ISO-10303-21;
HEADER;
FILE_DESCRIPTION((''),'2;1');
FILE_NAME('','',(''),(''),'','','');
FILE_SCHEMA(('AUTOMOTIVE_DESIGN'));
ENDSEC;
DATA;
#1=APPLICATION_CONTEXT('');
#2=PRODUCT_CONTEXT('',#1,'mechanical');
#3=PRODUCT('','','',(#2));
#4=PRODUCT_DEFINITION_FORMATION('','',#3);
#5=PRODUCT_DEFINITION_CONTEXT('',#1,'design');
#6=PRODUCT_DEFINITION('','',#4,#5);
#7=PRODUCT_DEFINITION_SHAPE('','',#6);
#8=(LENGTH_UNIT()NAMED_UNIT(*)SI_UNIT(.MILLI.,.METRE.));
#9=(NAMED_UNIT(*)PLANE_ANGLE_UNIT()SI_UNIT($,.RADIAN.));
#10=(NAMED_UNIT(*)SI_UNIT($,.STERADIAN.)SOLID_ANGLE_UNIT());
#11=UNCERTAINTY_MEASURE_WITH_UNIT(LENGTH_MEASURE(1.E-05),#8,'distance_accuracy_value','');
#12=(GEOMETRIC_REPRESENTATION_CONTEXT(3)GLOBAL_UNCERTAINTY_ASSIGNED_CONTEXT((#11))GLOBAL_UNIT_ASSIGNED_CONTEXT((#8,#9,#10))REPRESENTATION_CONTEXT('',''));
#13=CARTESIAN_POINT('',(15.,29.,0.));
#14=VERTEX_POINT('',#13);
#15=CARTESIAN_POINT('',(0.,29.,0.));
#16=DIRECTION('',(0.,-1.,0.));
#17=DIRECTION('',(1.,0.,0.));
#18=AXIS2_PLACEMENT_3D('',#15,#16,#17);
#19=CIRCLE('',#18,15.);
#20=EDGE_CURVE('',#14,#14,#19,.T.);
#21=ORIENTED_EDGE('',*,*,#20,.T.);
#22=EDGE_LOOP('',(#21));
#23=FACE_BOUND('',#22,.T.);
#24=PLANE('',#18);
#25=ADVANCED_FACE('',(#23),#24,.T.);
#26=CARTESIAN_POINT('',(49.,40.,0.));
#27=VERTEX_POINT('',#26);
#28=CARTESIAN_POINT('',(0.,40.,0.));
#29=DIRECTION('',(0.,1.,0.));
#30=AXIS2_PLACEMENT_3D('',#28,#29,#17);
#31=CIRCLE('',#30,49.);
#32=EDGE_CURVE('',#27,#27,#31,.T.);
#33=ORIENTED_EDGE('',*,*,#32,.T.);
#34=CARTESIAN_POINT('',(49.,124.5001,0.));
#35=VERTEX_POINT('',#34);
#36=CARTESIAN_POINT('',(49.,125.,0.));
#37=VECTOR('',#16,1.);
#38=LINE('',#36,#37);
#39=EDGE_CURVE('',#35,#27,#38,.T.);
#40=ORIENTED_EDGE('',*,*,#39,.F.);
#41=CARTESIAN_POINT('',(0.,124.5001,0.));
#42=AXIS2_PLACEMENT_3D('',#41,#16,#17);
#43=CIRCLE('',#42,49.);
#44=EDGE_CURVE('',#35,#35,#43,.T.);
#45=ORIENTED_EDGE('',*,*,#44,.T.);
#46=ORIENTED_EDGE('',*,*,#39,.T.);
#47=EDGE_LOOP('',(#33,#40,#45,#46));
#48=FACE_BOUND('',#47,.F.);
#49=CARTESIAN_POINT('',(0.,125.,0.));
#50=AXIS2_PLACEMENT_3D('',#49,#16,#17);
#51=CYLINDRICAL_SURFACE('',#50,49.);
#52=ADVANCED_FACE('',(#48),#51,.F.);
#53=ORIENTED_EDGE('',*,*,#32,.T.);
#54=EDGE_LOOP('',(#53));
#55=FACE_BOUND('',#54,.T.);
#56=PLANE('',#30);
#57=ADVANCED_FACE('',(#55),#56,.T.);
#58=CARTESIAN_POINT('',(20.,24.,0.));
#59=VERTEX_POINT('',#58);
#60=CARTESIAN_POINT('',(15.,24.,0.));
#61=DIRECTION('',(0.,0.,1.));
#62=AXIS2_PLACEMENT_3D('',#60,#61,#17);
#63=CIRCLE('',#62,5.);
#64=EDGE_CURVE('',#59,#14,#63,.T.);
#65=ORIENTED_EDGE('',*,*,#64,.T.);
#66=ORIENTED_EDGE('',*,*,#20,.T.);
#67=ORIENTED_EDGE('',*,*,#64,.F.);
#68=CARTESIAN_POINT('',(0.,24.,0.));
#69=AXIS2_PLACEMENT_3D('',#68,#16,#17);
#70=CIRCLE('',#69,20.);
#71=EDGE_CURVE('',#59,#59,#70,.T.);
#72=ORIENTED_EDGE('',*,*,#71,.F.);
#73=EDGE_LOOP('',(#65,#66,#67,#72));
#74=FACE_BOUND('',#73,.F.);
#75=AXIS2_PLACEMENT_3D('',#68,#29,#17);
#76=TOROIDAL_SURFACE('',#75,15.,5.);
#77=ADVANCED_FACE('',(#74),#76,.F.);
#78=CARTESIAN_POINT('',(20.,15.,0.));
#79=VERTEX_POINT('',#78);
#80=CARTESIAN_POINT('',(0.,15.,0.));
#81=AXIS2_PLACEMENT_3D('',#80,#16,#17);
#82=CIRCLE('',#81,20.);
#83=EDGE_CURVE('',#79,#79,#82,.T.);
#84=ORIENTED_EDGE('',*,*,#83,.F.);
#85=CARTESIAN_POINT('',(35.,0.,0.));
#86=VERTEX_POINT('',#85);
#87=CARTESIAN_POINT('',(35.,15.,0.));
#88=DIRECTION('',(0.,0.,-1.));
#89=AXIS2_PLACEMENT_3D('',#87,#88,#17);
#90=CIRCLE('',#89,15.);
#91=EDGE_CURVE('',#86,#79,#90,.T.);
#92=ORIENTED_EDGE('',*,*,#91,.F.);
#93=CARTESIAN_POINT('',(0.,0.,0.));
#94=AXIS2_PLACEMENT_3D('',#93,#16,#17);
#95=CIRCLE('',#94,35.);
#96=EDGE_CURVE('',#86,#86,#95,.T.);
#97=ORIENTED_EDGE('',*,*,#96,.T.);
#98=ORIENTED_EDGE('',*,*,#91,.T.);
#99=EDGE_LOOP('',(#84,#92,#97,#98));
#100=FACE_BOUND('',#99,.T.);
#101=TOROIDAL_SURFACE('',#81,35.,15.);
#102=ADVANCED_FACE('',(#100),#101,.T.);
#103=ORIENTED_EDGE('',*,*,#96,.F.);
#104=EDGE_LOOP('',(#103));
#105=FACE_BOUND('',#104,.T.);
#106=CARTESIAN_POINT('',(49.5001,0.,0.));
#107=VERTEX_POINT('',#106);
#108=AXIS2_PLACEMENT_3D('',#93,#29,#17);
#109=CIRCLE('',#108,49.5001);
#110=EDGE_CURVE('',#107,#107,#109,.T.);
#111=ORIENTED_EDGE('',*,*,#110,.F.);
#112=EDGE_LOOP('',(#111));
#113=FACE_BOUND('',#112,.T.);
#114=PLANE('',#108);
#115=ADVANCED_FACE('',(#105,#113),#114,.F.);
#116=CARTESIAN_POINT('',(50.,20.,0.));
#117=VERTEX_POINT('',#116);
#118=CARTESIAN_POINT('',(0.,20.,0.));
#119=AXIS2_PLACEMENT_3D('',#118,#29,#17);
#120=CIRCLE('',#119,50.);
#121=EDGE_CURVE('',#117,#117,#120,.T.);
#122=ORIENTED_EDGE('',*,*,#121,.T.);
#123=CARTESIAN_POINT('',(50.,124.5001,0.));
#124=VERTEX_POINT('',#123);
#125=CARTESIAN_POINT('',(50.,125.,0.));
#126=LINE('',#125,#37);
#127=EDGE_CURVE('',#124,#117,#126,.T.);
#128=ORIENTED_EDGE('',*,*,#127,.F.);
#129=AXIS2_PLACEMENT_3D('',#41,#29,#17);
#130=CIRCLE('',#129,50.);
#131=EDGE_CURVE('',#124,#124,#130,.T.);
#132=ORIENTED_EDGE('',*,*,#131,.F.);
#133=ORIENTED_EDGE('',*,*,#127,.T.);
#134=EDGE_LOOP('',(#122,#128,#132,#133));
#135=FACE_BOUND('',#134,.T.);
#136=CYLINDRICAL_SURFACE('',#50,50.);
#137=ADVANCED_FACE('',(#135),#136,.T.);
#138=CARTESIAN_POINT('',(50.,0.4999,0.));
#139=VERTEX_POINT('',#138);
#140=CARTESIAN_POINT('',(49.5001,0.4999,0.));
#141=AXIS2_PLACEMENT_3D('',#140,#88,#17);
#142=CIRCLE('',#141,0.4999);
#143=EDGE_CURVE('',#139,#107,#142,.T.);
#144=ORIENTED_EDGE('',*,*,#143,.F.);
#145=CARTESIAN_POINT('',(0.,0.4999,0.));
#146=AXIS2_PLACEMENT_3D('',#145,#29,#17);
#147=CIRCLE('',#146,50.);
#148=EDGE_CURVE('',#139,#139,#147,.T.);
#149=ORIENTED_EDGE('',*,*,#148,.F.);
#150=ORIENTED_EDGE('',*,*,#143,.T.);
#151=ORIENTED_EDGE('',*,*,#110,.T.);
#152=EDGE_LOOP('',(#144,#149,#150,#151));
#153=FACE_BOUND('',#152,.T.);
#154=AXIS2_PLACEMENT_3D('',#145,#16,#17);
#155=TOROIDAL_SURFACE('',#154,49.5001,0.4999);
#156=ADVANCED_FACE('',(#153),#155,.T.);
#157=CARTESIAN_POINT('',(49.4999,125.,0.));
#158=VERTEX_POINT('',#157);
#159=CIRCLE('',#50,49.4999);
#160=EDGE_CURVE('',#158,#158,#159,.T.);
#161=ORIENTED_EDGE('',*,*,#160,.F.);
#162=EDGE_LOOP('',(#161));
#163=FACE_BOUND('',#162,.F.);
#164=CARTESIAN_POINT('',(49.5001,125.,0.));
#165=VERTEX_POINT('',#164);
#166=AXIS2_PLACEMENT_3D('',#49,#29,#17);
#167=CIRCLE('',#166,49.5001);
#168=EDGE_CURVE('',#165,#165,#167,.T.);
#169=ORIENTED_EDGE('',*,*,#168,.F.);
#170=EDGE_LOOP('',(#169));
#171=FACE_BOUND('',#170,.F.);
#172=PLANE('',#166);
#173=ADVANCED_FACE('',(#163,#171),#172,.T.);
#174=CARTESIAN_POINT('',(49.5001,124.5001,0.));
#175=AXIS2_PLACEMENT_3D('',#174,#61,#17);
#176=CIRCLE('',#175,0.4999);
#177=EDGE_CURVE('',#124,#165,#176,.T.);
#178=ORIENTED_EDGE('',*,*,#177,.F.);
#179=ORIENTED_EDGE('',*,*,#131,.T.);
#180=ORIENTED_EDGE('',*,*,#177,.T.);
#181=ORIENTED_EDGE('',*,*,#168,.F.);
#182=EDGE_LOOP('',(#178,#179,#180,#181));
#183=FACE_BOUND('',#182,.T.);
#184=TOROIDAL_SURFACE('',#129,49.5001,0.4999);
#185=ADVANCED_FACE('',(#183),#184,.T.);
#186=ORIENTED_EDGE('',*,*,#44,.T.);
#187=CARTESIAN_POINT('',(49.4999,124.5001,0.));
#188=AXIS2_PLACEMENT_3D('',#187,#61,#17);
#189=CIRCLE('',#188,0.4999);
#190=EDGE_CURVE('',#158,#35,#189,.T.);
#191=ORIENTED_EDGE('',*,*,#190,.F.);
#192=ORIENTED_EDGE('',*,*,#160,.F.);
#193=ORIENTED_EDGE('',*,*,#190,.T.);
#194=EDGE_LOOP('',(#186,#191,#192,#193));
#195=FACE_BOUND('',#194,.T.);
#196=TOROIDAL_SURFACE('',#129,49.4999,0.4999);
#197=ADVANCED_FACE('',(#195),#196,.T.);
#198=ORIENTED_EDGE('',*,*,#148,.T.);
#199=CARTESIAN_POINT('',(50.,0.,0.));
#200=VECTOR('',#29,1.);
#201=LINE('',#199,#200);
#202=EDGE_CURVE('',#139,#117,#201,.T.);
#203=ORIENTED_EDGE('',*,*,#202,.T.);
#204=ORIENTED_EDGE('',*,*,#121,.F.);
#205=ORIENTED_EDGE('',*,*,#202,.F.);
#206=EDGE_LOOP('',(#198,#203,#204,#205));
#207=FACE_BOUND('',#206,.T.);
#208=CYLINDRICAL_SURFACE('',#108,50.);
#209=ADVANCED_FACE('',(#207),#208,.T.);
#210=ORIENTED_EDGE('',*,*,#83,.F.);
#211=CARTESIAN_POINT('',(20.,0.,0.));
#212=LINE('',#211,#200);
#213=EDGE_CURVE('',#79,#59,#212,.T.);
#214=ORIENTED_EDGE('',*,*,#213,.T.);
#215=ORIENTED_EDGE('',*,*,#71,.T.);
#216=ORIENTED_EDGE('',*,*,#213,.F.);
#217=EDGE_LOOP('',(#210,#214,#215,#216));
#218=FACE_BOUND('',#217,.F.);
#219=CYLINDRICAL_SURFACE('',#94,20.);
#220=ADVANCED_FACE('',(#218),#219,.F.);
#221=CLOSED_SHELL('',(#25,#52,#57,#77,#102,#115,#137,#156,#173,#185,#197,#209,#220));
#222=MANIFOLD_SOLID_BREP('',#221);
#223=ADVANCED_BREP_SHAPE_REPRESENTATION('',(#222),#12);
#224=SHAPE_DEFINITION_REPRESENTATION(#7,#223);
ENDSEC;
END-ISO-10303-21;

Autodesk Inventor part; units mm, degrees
ref_plane "YZ Plane" through (0, 0, 0) normal (1, 0, 0) x (0, 1, 0)
ref_plane "XZ Plane" through (0, 0, 0) normal (0, 1, 0) x (-1, 0, 0)
ref_plane "XY Plane" through (0, 0, 0) normal (0, 0, 1) x (1, 0, 0)
sketch "Sketch1" plane through (0, 0, 0) normal (0, 0, 1) x (1, 0, 0)
  line L0 (0, 0) -> (50, 0)
  line L1 (50, 0) -> (50, 20)
  line L2 (0, 0) -> (0, 125)
  line L3 (0, 125) -> (50, 125)
  line L4 (50, 125) -> (50, 20)
  dimension "d15" = 125
revolve "Revolution1" add sketch "Sketch1" angle 360 about axis through (0, 0, 0) along (0, 1, 0)
shell "Shell1" thickness 1 removed faces 1 at (-6.8644, 125, 10.9394)
sketch "Sketch2" plane through (0, 1, 0) normal (0, 1, 0) x (1, 0, 0)
  circle A0 centre (0, 0) radius 49 projected
  circle A1 centre (0, 0) radius 49 projected
extrude "Extrusion1" add sketch "Sketch2" along normal blind 39
fillet "Fillet1" radius 0.5 3 edges at (-50, 125, 0) (-49, 125, 0) (-50, 0, 0)
sketch "Sketch3" plane through (0, 0, 0) normal (0, -1, 0) x (1, 0, 0)
  circle A0 centre (0, 0) radius 49.5 projected
  circle A1 centre (0, 0) radius 20
extrude "Extrusion2" cut sketch "Sketch3" against normal blind 29 contours A1
fillet "Fillet2" radius 15 1 edges at (-20, 0, 0)
fillet "Fillet3" radius 5 1 edges at (-20, 29, 0)
properties part number "Visk"
